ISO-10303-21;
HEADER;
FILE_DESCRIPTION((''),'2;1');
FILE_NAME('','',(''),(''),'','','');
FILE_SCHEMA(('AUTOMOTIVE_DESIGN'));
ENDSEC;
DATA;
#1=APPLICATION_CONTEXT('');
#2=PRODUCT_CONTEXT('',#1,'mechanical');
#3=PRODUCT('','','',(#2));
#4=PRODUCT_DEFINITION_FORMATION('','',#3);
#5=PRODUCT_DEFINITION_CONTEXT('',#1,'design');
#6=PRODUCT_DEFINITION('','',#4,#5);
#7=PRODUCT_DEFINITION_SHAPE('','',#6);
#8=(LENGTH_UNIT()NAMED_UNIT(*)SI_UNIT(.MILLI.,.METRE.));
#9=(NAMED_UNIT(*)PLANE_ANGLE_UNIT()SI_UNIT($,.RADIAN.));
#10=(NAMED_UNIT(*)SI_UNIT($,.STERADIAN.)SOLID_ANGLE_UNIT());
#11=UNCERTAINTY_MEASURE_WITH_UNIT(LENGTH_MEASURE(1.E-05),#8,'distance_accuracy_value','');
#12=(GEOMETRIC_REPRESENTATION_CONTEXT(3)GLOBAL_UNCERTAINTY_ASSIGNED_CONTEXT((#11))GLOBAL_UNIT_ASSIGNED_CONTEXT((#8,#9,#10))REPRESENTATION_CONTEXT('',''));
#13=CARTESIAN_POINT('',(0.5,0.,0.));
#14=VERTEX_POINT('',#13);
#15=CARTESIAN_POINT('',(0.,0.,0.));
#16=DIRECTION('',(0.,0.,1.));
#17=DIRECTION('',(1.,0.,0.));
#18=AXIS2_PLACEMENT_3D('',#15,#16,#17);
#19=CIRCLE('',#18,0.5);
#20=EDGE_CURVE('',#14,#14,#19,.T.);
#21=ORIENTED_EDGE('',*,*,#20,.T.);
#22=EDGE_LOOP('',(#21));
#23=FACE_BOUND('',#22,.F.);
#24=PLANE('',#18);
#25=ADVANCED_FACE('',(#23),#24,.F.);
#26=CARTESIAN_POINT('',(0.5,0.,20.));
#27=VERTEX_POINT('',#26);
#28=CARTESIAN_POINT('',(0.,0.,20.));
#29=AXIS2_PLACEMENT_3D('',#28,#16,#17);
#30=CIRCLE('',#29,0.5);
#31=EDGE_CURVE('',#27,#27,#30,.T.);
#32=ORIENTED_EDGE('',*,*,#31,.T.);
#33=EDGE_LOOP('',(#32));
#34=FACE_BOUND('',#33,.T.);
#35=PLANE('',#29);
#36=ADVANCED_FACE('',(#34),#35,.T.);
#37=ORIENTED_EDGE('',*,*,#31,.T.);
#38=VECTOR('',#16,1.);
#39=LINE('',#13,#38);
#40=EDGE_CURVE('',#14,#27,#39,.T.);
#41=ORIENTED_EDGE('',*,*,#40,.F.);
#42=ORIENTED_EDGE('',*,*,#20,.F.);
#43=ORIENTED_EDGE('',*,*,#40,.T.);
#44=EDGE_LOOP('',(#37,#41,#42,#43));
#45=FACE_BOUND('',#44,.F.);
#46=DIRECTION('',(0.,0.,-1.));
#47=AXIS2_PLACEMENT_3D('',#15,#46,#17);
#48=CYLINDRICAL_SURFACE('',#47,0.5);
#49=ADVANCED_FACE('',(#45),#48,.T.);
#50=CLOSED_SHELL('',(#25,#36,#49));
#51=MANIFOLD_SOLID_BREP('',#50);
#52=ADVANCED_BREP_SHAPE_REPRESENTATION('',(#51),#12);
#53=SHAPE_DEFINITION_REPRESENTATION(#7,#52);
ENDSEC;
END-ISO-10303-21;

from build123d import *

# Parameters (mm, degrees)
F0_R     = 0.5
F1_DEPTH = 20


# Not quite as in the source:
# - a feature names something its author has since deleted; it is built from what else it names


with BuildPart() as f1:
    # F0 (on Top) → F1 (new body)
    with BuildSketch(Plane.XY):
        Circle(F0_R)
    extrude(amount=F1_DEPTH)


solid = f1.part
